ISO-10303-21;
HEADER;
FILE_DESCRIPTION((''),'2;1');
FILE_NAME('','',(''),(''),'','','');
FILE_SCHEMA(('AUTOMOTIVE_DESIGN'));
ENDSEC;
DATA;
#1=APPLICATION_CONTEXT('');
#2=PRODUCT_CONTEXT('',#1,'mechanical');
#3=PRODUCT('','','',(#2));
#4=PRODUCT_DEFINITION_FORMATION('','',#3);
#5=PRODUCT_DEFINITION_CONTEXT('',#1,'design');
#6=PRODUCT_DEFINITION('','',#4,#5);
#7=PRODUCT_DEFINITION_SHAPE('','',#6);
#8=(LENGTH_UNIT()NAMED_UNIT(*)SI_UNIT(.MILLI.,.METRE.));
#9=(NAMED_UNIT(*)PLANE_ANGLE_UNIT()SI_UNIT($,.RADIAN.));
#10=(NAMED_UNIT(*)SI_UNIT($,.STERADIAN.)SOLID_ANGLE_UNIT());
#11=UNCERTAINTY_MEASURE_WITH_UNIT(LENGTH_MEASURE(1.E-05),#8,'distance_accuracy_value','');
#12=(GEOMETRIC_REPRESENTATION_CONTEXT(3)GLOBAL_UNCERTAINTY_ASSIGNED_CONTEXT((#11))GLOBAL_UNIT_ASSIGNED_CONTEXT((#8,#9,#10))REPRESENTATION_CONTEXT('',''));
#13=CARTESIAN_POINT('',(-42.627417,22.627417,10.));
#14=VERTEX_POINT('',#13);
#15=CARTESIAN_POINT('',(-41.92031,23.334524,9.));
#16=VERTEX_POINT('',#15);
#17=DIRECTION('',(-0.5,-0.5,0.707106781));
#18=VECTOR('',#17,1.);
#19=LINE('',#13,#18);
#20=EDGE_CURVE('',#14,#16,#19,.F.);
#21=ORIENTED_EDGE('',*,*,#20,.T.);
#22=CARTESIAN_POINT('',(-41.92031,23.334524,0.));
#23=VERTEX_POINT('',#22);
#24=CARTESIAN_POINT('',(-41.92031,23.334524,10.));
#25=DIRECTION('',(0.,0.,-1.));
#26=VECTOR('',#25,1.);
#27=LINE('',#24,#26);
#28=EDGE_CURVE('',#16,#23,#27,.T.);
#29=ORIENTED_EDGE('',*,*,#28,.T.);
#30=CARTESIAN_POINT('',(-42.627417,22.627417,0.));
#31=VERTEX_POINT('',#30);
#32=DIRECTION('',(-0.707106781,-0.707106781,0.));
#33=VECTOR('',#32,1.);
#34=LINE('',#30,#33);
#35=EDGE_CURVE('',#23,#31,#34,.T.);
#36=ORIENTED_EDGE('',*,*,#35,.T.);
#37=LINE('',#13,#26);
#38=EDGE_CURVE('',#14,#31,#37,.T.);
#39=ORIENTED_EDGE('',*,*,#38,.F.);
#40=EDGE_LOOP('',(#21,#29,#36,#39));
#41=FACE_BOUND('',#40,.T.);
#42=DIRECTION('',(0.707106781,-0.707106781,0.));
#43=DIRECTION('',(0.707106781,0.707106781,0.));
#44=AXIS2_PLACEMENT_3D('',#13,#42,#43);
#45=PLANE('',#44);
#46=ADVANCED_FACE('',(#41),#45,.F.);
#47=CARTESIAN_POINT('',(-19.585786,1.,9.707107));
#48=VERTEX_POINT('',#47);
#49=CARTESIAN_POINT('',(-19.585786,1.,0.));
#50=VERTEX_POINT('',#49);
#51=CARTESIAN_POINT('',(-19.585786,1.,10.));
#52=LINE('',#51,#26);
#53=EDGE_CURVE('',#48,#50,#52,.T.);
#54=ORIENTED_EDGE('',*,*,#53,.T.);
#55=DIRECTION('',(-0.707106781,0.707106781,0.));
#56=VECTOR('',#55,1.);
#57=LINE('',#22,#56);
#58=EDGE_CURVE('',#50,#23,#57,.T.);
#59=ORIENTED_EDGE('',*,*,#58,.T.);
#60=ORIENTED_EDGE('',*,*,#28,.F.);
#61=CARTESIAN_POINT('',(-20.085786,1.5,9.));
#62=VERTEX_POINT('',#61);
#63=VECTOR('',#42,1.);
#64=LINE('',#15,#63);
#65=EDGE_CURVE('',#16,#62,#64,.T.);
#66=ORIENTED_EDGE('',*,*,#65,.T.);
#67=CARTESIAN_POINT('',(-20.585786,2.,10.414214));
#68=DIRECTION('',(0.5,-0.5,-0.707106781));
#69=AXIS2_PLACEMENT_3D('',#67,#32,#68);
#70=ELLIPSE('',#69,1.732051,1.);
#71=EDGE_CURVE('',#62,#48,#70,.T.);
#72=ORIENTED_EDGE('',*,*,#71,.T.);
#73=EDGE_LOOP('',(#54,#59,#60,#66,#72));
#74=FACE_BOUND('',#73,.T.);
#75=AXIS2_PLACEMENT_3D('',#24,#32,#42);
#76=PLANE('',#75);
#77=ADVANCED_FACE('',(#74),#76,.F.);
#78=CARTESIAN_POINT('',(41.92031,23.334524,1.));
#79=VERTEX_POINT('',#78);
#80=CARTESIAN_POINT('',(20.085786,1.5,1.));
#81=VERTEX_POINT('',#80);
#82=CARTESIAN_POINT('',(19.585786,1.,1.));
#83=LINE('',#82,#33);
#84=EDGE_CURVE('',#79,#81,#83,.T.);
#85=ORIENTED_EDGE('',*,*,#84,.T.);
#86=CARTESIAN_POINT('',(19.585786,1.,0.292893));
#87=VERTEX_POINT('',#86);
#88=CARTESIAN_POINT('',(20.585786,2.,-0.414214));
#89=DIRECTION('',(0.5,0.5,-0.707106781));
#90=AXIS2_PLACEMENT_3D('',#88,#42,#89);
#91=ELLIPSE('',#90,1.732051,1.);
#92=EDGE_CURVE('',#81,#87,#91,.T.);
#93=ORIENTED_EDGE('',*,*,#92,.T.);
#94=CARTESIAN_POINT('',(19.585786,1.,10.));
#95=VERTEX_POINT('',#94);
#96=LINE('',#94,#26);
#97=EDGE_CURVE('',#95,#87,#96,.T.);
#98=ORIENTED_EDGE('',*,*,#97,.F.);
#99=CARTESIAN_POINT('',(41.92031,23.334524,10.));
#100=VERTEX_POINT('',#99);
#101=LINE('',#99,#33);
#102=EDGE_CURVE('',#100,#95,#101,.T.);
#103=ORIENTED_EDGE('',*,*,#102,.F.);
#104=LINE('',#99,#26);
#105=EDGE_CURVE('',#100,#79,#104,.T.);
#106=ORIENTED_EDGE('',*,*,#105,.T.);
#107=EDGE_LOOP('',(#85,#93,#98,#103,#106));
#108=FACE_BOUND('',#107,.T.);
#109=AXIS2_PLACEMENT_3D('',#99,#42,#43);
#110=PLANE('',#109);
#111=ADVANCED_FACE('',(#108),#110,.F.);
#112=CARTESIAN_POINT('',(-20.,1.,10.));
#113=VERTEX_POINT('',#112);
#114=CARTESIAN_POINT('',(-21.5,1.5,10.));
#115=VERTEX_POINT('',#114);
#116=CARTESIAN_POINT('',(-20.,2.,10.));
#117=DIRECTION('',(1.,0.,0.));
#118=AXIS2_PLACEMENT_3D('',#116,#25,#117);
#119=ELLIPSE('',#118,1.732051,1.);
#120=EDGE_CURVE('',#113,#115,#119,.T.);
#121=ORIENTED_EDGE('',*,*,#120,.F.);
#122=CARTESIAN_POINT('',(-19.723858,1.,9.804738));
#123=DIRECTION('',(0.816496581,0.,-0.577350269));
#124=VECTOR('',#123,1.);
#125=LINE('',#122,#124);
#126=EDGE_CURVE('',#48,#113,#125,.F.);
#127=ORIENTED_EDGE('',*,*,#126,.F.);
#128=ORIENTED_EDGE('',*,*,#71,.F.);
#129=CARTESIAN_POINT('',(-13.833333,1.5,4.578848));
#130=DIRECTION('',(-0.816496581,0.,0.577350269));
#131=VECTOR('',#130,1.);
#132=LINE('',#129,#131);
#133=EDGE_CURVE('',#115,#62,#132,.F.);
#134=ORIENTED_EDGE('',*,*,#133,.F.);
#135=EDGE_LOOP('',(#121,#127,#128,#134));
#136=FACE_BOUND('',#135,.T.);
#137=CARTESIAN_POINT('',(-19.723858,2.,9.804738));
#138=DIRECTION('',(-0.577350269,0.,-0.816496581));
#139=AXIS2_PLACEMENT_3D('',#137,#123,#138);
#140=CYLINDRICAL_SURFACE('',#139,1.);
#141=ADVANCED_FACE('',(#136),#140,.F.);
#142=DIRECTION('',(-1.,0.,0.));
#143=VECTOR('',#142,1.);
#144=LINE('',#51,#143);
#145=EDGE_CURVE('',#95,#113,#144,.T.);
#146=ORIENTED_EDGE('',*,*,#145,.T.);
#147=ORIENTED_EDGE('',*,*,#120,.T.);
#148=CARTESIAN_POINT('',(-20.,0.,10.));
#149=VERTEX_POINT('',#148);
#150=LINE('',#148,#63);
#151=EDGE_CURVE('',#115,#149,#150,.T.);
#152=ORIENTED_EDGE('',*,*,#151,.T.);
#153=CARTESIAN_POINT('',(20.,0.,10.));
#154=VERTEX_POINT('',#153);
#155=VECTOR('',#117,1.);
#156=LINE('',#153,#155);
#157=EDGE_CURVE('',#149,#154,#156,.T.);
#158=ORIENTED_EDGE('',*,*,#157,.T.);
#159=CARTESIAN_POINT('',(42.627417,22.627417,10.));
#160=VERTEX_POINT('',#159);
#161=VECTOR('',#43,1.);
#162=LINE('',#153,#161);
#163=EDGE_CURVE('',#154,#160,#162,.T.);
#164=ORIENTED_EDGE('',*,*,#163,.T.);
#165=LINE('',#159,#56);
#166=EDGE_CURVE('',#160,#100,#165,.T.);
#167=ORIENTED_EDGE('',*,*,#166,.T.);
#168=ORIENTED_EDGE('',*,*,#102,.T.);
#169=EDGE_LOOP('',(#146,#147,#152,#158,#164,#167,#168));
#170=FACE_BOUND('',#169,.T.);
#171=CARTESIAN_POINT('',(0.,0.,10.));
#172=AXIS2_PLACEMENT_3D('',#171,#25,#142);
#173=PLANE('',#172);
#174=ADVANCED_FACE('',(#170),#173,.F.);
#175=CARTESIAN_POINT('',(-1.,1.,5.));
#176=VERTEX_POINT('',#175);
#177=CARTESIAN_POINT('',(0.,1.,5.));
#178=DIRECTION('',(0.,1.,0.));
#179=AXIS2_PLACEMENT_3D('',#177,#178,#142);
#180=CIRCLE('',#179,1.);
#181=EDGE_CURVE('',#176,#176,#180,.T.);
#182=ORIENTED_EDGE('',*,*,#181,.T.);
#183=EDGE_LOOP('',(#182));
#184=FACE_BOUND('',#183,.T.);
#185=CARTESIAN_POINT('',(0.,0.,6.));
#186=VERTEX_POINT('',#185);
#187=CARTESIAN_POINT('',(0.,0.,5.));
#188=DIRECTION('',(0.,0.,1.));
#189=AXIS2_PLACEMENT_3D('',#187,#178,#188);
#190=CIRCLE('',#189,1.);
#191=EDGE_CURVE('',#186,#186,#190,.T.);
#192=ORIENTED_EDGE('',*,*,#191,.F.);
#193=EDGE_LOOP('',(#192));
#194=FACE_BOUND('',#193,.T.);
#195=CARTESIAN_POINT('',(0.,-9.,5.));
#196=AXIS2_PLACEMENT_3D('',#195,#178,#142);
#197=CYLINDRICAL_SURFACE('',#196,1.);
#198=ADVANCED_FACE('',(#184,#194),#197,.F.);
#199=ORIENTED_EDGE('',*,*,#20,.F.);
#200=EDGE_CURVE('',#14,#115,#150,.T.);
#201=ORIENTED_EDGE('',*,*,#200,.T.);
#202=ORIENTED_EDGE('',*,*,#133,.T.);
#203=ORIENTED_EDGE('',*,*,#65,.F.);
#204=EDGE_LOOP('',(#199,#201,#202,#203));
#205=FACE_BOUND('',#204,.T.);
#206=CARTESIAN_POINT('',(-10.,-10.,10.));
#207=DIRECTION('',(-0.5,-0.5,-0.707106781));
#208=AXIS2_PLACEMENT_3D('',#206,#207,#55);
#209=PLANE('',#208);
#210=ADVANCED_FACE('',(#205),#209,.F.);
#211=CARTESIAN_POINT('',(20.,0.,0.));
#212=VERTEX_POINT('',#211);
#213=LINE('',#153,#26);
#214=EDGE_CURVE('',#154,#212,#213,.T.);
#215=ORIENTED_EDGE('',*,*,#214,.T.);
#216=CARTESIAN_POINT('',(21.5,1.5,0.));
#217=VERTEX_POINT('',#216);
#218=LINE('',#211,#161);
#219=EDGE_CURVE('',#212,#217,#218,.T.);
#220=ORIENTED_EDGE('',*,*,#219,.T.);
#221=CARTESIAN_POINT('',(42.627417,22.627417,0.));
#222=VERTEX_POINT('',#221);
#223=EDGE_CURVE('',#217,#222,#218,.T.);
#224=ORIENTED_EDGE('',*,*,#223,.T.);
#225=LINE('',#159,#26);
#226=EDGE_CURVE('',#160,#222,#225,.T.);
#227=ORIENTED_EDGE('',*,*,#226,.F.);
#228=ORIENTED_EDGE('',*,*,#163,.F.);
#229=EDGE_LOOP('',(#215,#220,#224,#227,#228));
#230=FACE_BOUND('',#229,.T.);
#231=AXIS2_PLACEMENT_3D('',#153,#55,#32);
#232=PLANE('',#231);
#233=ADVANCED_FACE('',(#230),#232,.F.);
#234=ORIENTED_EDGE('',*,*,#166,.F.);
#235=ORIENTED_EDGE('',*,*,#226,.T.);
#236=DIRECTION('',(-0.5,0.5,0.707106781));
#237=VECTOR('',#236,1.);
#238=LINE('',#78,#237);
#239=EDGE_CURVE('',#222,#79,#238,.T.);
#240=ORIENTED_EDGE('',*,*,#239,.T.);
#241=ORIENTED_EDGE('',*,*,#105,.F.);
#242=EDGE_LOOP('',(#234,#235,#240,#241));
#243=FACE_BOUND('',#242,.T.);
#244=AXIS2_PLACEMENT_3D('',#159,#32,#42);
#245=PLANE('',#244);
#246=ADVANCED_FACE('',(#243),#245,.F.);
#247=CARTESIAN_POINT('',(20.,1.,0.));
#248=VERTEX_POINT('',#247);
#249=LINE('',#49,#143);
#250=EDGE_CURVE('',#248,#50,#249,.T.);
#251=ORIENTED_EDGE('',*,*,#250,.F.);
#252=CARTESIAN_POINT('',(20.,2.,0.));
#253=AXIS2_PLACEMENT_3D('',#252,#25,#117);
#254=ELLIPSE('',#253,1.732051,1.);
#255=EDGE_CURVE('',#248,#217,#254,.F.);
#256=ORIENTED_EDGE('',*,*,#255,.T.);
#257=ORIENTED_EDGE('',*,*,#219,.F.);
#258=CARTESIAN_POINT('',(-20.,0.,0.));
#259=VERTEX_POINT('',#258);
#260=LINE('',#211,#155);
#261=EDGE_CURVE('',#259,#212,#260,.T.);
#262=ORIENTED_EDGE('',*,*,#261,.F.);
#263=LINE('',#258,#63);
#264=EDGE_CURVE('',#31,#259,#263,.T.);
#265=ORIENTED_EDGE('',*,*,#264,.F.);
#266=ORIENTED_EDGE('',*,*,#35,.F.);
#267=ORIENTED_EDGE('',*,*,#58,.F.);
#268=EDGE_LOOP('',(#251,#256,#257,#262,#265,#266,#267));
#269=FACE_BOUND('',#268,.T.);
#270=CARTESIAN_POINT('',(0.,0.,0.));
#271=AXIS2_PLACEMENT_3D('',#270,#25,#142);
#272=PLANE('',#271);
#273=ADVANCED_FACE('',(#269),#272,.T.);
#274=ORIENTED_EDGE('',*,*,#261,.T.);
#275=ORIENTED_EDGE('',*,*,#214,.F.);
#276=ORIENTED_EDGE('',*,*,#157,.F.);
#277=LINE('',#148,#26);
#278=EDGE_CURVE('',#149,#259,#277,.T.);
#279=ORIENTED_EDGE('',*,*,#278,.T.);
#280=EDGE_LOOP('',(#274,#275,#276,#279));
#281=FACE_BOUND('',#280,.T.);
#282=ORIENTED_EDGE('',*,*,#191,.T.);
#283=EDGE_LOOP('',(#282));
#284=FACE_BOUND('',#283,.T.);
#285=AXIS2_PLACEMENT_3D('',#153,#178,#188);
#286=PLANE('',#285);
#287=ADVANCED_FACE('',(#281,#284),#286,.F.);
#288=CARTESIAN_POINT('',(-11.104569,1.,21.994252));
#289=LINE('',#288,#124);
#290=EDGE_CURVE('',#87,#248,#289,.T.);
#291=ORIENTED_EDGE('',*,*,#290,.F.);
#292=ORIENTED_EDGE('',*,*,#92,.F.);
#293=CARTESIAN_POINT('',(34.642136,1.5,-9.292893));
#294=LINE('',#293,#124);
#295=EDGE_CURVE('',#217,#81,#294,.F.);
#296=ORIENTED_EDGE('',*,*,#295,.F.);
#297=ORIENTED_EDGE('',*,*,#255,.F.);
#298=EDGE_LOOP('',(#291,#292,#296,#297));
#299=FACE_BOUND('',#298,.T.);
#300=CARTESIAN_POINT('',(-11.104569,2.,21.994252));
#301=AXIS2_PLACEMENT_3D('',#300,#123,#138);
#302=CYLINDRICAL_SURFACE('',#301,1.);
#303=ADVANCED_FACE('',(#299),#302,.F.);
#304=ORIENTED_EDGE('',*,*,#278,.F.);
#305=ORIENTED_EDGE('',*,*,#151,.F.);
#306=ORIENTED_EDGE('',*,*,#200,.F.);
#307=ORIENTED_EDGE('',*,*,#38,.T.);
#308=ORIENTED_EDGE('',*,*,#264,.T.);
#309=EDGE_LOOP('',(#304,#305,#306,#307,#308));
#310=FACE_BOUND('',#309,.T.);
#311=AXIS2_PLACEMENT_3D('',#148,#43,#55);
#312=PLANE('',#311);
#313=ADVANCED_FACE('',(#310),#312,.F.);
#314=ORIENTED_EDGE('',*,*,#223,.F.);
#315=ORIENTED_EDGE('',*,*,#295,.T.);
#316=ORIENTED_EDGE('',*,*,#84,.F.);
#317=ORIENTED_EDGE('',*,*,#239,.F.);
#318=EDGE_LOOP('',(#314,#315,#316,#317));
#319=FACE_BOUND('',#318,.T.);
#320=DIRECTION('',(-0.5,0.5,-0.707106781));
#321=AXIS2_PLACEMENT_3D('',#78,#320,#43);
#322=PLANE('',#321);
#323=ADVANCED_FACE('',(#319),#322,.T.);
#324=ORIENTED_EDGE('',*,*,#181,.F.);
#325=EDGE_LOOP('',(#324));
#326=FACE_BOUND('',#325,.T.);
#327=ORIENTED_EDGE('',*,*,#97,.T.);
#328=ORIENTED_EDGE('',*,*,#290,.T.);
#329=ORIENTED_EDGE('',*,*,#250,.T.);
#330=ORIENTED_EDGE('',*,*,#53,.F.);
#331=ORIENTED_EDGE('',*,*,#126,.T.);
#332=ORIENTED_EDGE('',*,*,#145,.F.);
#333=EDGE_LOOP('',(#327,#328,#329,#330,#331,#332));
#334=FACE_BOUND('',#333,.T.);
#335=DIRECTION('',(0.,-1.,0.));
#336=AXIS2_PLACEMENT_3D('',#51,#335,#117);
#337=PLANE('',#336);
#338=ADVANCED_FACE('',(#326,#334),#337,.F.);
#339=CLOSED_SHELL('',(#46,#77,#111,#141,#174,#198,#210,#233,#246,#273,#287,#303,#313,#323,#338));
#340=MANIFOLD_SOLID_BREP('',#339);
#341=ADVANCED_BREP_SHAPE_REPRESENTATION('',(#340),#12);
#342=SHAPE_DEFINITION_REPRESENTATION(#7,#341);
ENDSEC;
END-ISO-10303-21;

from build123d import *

# Parameters (mm, degrees)
BLADE_EXTRUDE_DEPTH        = 10
BLADE_CUT_SIZE             = 1
EDGE_ROUNDING_R            = 1
SKETCH2_R                  = 1
HOLE_FOR_SCREW_BLADE_DEPTH = 10


with BuildPart() as part:
    # Sketch1 → Blade Extrude (new body)
    with BuildSketch(Plane.XY):
        Polygon((20, 0), (-20, 0), (-42.627416998, 22.627416998), (-41.920310217, 23.334523779), (-19.585786438, 1), (19.585786438, 1), (41.920310217, 23.334523779), (42.627416998, 22.627416998), align=None)
    extrude(amount=BLADE_EXTRUDE_DEPTH)

    # Blade Cut
    blade_cut_edges = [part.edges().sort_by_distance(p)[0] for p in [
        (30.753048327, 12.16726189, 0),
        (-30.753048327, 12.16726189, 10),
    ]]
    chamfer(blade_cut_edges, length=BLADE_CUT_SIZE - 0.0001)  # a hair under: the kernel refuses the full size

    # Edge Rounding
    edge_rounding_edges = [part.edges().sort_by_distance(p)[0] for p in [
        (20.292822508, 1, 0.49995),
        (-20.292822508, 1, 9.50005),
    ]]
    fillet(edge_rounding_edges, radius=EDGE_ROUNDING_R)

    # Sketch2 → Hole for Screw (Blade) (cut)
    with BuildSketch(Plane(origin=(0, 1, 0), x_dir=(1, 0, 0), z_dir=(0, 1, 0))):
        with Locations(Location((0, -5, 0), (0, 0, 180))):
            Circle(SKETCH2_R)
    extrude(amount=-HOLE_FOR_SCREW_BLADE_DEPTH, mode=Mode.SUBTRACT)


solid = part.part
